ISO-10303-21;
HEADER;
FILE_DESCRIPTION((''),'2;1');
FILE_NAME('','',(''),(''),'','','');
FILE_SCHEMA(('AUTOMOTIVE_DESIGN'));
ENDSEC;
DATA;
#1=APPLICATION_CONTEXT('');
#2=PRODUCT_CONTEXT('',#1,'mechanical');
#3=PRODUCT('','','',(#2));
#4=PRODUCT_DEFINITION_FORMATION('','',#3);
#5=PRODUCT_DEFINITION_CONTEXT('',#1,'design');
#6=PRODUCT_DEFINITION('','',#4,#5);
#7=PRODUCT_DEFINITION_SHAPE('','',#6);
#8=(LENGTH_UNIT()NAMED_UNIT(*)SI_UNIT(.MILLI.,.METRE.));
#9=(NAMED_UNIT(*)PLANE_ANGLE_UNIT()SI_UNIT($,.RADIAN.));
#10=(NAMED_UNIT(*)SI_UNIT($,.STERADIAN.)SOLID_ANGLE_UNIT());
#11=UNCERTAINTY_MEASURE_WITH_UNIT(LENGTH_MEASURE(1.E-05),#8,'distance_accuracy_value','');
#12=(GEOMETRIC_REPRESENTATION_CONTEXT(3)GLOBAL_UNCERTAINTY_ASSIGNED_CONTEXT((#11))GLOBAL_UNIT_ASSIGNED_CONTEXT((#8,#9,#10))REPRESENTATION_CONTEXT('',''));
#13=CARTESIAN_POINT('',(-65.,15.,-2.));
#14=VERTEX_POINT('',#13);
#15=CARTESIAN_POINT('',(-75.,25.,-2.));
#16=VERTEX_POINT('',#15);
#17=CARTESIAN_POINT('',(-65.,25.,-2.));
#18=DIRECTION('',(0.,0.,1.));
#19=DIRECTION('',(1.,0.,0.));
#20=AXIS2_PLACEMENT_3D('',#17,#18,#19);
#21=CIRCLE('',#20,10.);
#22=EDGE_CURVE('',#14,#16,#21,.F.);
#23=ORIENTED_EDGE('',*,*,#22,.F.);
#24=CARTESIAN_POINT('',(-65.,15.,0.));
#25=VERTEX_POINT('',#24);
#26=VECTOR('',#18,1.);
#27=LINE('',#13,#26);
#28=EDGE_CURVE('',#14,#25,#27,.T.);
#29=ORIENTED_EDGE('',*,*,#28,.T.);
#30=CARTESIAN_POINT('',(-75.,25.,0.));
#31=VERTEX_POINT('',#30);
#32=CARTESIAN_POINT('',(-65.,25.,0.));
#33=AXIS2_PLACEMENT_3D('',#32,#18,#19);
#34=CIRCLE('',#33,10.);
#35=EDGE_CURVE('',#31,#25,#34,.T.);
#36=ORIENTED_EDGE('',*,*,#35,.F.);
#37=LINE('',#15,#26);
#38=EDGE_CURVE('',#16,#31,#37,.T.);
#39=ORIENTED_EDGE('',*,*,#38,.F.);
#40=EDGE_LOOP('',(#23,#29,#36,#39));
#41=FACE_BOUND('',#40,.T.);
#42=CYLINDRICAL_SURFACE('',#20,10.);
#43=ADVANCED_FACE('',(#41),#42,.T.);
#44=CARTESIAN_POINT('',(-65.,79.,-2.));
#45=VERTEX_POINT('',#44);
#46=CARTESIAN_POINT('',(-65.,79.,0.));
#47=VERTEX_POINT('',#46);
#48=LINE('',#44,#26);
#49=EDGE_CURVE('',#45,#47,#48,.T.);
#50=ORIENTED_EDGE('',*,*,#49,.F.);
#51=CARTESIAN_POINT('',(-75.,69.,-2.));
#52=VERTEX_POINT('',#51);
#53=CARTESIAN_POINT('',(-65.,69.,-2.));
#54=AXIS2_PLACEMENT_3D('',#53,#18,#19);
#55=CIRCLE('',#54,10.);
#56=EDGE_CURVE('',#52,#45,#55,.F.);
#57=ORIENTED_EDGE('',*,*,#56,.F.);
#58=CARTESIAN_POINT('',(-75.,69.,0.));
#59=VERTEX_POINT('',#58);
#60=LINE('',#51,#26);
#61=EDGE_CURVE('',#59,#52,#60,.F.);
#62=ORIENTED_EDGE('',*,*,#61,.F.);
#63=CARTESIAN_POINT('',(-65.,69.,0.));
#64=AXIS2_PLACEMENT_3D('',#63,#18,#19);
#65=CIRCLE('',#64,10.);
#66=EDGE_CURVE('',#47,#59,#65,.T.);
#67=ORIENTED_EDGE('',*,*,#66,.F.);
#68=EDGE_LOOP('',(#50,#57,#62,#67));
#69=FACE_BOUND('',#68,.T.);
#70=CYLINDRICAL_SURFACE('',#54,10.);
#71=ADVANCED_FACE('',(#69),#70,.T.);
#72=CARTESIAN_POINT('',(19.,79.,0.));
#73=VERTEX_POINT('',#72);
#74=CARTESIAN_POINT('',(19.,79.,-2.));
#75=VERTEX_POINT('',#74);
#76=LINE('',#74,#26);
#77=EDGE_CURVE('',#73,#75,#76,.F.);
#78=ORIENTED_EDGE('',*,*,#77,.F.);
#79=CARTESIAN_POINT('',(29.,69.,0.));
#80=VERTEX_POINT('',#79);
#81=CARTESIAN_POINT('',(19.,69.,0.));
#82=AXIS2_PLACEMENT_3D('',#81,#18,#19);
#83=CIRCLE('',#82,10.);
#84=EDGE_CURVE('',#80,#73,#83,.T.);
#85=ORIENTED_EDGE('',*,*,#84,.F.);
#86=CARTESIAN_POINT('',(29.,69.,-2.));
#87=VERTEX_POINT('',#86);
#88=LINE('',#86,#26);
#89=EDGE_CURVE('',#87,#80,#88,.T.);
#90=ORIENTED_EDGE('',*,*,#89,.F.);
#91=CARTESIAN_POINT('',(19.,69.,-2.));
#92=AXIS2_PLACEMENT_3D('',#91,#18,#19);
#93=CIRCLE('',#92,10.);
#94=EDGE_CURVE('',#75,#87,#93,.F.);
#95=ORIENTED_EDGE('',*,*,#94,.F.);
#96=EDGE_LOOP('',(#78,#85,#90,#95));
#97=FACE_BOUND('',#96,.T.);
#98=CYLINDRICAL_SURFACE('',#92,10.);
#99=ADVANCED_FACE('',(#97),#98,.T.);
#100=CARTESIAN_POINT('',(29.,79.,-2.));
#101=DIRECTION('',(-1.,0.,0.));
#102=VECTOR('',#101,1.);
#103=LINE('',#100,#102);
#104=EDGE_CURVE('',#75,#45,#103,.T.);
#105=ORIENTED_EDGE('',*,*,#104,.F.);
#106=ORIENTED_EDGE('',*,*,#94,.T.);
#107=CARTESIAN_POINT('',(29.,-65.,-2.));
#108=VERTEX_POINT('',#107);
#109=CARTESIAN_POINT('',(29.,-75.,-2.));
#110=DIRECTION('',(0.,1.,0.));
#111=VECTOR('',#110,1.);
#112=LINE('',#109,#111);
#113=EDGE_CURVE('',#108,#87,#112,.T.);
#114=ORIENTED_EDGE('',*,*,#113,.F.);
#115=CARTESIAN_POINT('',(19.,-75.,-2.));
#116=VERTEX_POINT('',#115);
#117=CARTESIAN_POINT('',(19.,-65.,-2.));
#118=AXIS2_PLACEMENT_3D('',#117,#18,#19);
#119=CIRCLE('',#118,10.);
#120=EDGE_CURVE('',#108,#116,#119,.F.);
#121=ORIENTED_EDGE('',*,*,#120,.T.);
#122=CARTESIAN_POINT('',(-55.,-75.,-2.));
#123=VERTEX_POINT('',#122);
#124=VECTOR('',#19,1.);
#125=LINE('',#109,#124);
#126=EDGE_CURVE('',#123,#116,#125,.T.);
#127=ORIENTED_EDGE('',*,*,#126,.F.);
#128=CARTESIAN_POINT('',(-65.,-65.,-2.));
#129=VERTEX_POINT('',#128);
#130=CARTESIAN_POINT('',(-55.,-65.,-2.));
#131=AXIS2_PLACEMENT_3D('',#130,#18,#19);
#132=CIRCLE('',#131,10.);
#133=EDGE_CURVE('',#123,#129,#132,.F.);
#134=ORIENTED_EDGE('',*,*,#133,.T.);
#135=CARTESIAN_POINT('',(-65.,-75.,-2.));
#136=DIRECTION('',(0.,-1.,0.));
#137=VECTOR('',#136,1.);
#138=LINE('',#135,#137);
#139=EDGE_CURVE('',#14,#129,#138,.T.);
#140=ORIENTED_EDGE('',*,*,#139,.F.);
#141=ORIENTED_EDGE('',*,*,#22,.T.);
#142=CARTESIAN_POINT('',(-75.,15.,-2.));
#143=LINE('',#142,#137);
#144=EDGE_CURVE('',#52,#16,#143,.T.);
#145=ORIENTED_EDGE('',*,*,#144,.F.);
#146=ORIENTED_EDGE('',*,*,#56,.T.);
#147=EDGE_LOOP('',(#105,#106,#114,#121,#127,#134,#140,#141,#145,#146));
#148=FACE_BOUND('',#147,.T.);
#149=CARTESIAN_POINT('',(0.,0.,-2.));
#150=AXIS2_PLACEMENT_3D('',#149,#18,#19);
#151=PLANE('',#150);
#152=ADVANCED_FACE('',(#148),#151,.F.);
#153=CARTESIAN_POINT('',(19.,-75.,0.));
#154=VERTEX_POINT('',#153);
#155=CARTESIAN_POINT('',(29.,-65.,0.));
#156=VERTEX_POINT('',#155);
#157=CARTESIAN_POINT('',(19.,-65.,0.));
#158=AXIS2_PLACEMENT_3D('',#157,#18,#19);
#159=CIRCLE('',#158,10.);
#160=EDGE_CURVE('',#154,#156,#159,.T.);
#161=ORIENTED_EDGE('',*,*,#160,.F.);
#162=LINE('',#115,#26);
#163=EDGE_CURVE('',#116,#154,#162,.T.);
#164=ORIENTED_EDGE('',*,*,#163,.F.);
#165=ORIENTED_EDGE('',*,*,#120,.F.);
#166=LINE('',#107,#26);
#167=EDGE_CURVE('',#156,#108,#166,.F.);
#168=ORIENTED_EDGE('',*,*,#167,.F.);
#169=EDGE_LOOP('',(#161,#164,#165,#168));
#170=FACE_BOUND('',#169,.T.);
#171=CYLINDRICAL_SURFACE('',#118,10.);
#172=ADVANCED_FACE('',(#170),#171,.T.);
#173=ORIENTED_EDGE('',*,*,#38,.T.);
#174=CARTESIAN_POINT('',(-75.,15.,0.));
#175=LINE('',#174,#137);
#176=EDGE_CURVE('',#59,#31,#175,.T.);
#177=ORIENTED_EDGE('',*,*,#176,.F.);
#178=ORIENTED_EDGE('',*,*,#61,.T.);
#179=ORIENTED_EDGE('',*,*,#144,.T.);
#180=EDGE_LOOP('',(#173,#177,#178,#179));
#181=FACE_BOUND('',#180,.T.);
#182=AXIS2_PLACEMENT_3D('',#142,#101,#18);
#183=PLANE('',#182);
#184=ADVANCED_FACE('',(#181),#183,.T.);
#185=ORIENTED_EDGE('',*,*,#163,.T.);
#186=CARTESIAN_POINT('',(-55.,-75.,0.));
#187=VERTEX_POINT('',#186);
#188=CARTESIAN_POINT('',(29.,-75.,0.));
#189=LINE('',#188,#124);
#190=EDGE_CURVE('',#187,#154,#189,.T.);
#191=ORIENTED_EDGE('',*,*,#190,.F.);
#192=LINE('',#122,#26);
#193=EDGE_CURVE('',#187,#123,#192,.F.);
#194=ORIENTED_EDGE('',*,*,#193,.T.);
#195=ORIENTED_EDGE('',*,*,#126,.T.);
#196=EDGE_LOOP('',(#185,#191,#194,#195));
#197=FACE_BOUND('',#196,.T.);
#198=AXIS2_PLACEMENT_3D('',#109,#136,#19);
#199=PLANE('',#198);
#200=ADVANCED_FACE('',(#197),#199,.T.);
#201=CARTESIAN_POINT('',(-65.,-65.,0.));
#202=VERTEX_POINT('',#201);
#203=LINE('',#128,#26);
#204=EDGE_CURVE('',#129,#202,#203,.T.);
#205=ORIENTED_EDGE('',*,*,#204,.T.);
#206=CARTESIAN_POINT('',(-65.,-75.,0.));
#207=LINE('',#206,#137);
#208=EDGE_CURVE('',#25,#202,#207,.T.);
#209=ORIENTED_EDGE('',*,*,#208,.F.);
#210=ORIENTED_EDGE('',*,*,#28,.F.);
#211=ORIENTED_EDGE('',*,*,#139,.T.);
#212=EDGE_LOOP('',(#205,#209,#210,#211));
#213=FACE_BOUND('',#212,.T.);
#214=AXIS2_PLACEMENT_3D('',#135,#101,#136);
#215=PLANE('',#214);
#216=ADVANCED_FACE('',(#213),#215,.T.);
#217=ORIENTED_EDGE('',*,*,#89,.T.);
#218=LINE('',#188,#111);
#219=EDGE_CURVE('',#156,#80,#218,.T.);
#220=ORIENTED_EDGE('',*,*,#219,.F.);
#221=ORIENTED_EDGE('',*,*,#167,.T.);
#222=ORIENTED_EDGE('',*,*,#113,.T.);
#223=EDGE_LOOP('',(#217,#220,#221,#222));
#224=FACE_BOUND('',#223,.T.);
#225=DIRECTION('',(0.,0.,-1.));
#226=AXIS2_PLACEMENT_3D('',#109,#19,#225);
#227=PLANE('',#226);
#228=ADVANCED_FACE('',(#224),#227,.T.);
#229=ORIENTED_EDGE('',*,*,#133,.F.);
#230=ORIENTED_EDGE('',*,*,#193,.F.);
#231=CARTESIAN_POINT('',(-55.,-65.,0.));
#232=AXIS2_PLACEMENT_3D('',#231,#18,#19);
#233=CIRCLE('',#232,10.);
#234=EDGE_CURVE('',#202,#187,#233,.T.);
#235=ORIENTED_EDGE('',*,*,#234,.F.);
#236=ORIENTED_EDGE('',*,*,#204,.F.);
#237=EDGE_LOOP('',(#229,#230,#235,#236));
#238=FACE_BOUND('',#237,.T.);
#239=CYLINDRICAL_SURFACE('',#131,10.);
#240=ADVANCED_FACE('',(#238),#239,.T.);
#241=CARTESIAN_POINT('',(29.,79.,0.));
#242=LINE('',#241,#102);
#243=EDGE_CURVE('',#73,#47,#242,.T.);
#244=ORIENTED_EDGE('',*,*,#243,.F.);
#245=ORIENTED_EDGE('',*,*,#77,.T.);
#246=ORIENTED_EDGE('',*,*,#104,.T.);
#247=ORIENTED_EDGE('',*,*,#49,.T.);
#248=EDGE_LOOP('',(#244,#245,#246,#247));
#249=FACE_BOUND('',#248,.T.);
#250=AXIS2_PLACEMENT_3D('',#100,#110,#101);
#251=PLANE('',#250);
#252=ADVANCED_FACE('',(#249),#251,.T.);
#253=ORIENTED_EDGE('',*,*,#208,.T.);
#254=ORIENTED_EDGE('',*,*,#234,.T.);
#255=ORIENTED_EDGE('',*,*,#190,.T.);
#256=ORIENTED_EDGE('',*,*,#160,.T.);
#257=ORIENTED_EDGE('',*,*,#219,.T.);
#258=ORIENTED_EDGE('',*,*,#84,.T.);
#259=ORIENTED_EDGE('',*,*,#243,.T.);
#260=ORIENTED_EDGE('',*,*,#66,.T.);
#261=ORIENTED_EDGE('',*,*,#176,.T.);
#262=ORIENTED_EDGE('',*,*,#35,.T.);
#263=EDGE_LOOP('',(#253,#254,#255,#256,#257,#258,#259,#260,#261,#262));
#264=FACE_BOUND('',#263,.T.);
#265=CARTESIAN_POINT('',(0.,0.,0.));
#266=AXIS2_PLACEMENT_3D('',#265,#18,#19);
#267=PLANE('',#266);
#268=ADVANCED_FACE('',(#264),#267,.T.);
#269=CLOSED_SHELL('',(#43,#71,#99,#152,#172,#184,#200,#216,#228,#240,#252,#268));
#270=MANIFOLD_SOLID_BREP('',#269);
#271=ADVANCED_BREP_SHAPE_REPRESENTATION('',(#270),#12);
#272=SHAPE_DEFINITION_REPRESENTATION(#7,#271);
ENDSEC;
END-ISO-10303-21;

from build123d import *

# Parameters (mm, degrees)
BASE_FLANGE1_DEPTH = 2
FILLET1_R          = 10


# Sheet-metal steps are written as plain solids
with BuildPart() as part:
    # Sketch1 → Base-Flange1 (new body)
    with BuildSketch(Plane.XY):
        Polygon((-65, 15), (-75, 15), (-75, 79), (29, 79), (29, -75), (-65, -75), align=None)
    extrude(amount=-BASE_FLANGE1_DEPTH)

    # Fillet1
    fillet1_edges = [part.edges().sort_by_distance(p)[0] for p in [
        (-75, 79, -1),
        (-75, 15, -1),
        (-65, -75, -1),
        (29, -75, -1),
        (29, 79, -1),
    ]]
    fillet(fillet1_edges, radius=FILLET1_R - 0.0001)  # a hair under: the kernel refuses the full size


solid = part.part
